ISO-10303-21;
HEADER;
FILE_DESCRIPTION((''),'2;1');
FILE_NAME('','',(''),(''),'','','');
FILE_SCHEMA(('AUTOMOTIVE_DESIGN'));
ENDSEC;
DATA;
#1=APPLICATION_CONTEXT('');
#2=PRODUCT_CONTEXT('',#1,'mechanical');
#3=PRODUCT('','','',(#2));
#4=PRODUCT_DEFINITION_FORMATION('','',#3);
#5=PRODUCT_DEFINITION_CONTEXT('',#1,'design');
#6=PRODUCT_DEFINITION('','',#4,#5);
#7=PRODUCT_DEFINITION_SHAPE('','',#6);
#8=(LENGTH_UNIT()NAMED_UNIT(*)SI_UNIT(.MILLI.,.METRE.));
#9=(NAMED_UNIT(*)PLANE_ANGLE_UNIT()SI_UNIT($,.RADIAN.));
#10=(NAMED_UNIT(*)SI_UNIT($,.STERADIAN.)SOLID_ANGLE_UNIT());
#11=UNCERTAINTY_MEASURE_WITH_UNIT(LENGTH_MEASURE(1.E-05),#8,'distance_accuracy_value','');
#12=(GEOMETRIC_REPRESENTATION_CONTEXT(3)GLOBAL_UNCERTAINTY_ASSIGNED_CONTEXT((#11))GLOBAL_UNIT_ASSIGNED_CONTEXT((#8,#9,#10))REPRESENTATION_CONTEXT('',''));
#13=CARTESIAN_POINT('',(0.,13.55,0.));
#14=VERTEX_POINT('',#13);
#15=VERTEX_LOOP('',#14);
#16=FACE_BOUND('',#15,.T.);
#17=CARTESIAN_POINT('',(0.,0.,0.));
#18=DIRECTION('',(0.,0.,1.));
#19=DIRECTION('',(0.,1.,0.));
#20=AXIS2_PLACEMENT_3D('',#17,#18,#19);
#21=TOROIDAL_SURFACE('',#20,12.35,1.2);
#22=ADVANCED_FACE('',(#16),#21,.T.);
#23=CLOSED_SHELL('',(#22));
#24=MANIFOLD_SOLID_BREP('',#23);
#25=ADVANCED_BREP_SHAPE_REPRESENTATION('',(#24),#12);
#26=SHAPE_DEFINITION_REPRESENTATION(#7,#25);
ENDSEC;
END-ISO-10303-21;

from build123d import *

# Parameters (mm, degrees)
CROQUIS1_R = 1.2


# Read off the part's stored shape, not the designer's step: Sólido importado2
with BuildPart() as part:
    # Croquis1 → Revolución1 (revolve)
    with BuildSketch(Plane(origin=(0, 0, 0), x_dir=(1, 0, 0), z_dir=(0, 1, 0)), mode=Mode.PRIVATE) as revoluci_n1_sk:
        with Locations((12.35, 0)):
            Circle(CROQUIS1_R)
    revolve(revoluci_n1_sk.sketch.rotate(Axis((0, 0, -1.2), (0, 0, 1)), 90), axis=Axis((0, 0, -1.2), (0, 0, 1)))


solid = part.part
